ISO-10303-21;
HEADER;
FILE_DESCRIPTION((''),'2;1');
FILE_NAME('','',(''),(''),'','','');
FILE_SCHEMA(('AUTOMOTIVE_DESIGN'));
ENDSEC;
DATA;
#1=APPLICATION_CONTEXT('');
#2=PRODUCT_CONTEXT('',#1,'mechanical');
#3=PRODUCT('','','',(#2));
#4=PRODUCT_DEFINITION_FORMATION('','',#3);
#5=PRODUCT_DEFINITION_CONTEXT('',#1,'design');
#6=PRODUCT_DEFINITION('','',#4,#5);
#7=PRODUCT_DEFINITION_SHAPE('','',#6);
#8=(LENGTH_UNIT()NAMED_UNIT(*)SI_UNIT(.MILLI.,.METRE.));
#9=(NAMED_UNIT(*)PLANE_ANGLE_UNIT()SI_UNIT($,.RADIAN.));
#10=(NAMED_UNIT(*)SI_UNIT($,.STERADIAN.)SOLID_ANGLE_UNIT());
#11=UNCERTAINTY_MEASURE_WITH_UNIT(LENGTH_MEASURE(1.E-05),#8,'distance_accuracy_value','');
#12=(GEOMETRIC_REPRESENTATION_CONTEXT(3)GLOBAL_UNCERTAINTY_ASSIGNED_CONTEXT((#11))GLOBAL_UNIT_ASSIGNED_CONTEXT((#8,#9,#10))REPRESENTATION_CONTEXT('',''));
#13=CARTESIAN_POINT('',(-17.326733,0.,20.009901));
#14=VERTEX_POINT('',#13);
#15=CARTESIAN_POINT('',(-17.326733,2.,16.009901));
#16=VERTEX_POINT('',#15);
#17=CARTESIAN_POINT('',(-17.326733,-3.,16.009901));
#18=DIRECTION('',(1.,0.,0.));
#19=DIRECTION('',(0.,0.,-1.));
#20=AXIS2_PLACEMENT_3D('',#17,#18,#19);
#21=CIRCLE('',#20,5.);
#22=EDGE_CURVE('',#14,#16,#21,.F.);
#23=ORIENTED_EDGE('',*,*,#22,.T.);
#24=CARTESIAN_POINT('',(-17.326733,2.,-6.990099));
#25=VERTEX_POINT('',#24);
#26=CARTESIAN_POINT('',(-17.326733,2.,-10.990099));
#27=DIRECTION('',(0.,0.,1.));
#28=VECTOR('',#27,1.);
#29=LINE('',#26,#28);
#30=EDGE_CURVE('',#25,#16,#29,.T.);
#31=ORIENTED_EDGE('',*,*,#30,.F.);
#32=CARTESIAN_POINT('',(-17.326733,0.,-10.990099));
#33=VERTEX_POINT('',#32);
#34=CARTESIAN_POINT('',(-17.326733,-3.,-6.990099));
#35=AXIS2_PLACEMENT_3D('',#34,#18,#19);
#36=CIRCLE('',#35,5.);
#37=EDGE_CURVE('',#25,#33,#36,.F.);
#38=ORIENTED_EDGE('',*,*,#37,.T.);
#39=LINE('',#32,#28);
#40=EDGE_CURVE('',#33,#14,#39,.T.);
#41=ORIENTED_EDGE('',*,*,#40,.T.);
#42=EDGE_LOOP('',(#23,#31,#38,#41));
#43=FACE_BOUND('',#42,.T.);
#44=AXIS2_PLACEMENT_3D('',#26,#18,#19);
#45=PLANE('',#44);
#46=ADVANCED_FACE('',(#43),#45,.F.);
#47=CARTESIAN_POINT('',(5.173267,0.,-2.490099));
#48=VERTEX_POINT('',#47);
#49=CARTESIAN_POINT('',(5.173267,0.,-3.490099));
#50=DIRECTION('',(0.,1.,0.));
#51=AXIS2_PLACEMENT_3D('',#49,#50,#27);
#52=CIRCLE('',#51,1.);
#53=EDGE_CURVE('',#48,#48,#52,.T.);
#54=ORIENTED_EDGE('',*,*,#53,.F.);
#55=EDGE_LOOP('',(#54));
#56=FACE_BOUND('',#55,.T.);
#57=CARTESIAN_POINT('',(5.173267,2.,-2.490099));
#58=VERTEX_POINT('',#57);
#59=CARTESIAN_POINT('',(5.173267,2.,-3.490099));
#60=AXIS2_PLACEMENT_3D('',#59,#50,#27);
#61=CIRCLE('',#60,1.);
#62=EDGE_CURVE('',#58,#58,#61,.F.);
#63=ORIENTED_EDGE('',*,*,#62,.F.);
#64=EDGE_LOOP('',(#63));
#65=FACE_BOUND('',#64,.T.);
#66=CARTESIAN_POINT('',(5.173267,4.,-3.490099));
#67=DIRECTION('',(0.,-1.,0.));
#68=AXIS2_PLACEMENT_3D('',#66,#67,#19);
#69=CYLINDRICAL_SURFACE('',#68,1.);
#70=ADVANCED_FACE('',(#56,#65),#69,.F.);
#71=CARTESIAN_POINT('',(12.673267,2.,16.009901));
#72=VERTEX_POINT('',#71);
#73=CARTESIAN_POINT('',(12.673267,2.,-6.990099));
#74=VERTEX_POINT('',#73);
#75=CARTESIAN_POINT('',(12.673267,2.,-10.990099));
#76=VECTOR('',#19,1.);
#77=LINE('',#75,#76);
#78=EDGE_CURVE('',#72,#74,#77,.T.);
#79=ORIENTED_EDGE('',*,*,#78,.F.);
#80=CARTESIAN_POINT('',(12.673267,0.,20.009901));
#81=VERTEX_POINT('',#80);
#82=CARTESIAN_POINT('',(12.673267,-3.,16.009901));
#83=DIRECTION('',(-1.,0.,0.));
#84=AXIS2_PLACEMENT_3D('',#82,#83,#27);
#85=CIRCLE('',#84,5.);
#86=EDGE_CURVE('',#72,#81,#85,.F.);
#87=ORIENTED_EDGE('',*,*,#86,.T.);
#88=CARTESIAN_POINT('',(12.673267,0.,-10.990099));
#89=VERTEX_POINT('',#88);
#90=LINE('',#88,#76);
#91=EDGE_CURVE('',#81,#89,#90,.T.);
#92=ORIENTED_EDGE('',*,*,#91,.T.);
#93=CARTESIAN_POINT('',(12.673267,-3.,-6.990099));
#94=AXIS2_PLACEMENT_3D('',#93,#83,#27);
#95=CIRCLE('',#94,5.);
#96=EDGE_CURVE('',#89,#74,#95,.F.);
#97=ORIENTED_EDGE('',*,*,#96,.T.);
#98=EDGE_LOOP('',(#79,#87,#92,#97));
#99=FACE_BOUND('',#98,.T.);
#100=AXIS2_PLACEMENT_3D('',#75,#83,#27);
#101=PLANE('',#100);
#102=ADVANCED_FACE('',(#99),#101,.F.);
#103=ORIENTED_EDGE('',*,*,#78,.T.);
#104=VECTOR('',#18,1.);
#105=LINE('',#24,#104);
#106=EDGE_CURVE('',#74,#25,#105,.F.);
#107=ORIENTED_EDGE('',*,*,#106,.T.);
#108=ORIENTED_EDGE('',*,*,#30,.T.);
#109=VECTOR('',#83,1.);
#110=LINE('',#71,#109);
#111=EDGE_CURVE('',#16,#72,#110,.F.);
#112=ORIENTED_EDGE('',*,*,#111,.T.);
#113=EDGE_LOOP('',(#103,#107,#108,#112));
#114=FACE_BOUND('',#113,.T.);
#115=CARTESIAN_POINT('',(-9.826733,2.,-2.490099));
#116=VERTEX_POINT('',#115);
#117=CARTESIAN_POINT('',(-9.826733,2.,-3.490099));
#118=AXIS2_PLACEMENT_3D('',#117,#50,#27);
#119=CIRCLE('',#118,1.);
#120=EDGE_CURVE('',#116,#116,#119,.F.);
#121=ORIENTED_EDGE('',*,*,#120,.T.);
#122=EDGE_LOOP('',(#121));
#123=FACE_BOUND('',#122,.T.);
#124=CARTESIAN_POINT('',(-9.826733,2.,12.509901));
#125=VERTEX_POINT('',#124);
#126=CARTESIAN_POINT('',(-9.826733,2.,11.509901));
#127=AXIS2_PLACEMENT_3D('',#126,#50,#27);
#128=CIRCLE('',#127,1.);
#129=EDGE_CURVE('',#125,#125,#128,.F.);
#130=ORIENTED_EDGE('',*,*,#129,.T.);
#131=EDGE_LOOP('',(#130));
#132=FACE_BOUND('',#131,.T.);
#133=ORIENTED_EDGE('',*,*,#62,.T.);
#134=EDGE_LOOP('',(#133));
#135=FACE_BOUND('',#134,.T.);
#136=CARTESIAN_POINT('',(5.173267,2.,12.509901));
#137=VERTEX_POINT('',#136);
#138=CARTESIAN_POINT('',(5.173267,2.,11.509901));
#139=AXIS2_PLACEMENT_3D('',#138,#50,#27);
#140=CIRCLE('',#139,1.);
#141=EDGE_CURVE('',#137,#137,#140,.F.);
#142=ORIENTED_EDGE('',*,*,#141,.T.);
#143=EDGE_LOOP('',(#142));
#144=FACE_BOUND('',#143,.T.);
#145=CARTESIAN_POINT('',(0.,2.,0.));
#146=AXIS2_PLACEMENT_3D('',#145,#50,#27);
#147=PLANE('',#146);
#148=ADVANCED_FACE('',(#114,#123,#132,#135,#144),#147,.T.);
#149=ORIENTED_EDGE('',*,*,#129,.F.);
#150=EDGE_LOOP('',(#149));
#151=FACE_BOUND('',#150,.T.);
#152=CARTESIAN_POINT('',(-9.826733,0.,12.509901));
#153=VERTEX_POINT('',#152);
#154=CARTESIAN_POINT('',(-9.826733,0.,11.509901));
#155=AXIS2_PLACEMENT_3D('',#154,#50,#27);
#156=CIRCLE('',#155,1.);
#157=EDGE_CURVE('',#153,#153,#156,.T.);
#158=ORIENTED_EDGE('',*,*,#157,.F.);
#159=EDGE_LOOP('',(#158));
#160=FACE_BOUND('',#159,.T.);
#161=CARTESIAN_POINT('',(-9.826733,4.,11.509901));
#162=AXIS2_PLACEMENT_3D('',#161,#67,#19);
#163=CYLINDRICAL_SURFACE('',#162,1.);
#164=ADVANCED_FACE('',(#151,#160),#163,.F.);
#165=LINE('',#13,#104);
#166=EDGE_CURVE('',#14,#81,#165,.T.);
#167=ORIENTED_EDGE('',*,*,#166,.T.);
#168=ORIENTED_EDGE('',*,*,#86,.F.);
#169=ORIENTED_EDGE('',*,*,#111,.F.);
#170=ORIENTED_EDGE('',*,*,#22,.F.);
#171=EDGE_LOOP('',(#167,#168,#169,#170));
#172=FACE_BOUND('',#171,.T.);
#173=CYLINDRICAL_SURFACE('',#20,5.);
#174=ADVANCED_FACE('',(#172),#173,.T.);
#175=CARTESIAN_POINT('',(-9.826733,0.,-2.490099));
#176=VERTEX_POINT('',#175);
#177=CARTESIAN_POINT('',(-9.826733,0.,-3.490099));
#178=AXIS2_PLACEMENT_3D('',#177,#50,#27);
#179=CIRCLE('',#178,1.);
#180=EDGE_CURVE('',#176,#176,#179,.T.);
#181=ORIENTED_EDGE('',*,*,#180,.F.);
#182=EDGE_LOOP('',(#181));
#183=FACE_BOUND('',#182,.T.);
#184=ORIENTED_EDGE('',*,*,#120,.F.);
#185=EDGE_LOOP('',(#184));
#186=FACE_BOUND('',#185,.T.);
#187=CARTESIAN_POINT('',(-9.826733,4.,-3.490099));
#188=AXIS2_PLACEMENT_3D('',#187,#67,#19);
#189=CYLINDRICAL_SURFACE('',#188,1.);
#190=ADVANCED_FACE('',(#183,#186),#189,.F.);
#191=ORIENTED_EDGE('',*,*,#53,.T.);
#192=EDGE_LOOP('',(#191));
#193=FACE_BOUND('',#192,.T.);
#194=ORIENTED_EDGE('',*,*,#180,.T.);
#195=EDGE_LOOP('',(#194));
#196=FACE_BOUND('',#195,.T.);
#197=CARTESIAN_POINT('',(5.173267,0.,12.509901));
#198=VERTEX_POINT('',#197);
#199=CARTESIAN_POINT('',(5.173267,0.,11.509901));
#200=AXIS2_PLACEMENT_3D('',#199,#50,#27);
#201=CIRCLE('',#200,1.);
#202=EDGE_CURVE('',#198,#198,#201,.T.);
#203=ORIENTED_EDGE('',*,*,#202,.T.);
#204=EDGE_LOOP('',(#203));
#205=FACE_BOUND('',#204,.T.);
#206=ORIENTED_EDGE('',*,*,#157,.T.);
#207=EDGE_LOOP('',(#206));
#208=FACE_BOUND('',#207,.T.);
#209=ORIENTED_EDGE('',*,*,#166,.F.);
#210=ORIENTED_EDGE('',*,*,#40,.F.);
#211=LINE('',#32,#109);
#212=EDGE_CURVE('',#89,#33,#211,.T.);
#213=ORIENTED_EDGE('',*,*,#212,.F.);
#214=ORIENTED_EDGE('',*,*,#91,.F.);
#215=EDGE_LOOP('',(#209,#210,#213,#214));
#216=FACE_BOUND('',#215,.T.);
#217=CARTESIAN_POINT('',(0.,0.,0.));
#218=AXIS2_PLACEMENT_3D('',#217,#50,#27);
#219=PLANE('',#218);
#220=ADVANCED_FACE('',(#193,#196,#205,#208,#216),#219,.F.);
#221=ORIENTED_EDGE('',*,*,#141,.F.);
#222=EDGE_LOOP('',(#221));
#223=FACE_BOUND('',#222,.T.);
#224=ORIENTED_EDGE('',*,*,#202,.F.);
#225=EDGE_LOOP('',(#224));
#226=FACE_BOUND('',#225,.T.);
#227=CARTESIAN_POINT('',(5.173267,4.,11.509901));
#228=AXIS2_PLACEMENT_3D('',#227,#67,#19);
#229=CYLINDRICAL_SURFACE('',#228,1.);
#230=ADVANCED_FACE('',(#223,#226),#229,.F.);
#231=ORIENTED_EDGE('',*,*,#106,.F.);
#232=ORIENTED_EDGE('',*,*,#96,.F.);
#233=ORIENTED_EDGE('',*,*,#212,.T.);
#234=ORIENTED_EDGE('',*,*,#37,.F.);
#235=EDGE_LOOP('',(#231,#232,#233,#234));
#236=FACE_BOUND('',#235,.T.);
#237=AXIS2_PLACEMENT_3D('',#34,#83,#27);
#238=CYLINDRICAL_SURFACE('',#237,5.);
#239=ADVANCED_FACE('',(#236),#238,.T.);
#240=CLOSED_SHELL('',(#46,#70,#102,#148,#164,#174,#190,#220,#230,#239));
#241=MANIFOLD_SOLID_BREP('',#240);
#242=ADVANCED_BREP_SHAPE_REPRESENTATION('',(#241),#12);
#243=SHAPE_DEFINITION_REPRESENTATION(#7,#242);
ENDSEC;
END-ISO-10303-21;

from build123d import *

# Parameters (mm, degrees)
SKETCH1_W           = 30
SKETCH1_H           = 31
BOSS_EXTRUDE1_DEPTH = 2
SKETCH2_R           = 1
CUT_EXTRUDE2_DEPTH  = 4
FILLET2_R           = 5
FILLET3_R           = 5


with BuildPart() as part:
    # Sketch1 → Boss-Extrude1 (new body)
    with BuildSketch(Plane(origin=(0, 0, 0), x_dir=(1, 0, 0), z_dir=(0, 1, 0))):
        with Locations((-2.326732673, -4.50990099)):
            Rectangle(SKETCH1_W, SKETCH1_H)
    extrude(amount=BOSS_EXTRUDE1_DEPTH)

    # Sketch2 → Cut-Extrude2 (cut)
    with BuildSketch(Plane(origin=(0, 0, 0), x_dir=(1, 0, 0), z_dir=(0, 1, 0))):
        with Locations(Location((-9.826732673, 3.49009901, 0), (0, 0, 270))):
            Circle(SKETCH2_R)
        with Locations(Location((-9.826732673, -11.50990099, 0), (0, 0, 270))):
            Circle(SKETCH2_R)
        with Locations(Location((5.173267327, 3.49009901, 0), (0, 0, 270))):
            Circle(SKETCH2_R)
        with Locations(Location((5.173267327, -11.50990099, 0), (0, 0, 270))):
            Circle(SKETCH2_R)
    extrude(amount=CUT_EXTRUDE2_DEPTH, mode=Mode.SUBTRACT)

    # Fillet2
    # the kernel refuses this fillet: 5 mm, written as the material it takes off along each edge
    with BuildSketch(Plane(origin=(22.673267327, 2, 20.00990099), x_dir=(0, 0, -1), z_dir=(-1, 0, 0))) as fillet2_piece_1:
        with BuildLine():
            CenterArc((4, 5), FILLET2_R, 216.869897646, 53.130102354)
            Line((0, 2), (-0.08, 1.94))
            ThreePointArc((-0.08, 1.94), (-0.1, 1), (-0.1, 0))
            Line((-0.1, 0), (0, -0.1))
            Line((0, -0.1), (4, -0.1))
            Line((4, -0.1), (4, 0))
        make_face()
    extrude(amount=50, mode=Mode.SUBTRACT)

    # Fillet3
    # the kernel refuses this fillet: 5 mm, written as the material it takes off along each edge
    with BuildSketch(Plane(origin=(-27.326732673, 2, -10.99009901), x_dir=(0, -1, 0), z_dir=(1, 0, 0))) as fillet3_piece_1:
        with BuildLine():
            CenterArc((5, -4), FILLET3_R, 126.869897646, 53.130102354)
            Line((0, -4), (-0.1, -4))
            Line((-0.1, -4), (-0.1, 0))
            Line((-0.1, 0), (0, 0.1))
            ThreePointArc((0, 0.1), (1, 0.1), (1.94, 0.08))
            Line((1.94, 0.08), (2, 0))
        make_face()
    extrude(amount=50, mode=Mode.SUBTRACT)


solid = part.part
